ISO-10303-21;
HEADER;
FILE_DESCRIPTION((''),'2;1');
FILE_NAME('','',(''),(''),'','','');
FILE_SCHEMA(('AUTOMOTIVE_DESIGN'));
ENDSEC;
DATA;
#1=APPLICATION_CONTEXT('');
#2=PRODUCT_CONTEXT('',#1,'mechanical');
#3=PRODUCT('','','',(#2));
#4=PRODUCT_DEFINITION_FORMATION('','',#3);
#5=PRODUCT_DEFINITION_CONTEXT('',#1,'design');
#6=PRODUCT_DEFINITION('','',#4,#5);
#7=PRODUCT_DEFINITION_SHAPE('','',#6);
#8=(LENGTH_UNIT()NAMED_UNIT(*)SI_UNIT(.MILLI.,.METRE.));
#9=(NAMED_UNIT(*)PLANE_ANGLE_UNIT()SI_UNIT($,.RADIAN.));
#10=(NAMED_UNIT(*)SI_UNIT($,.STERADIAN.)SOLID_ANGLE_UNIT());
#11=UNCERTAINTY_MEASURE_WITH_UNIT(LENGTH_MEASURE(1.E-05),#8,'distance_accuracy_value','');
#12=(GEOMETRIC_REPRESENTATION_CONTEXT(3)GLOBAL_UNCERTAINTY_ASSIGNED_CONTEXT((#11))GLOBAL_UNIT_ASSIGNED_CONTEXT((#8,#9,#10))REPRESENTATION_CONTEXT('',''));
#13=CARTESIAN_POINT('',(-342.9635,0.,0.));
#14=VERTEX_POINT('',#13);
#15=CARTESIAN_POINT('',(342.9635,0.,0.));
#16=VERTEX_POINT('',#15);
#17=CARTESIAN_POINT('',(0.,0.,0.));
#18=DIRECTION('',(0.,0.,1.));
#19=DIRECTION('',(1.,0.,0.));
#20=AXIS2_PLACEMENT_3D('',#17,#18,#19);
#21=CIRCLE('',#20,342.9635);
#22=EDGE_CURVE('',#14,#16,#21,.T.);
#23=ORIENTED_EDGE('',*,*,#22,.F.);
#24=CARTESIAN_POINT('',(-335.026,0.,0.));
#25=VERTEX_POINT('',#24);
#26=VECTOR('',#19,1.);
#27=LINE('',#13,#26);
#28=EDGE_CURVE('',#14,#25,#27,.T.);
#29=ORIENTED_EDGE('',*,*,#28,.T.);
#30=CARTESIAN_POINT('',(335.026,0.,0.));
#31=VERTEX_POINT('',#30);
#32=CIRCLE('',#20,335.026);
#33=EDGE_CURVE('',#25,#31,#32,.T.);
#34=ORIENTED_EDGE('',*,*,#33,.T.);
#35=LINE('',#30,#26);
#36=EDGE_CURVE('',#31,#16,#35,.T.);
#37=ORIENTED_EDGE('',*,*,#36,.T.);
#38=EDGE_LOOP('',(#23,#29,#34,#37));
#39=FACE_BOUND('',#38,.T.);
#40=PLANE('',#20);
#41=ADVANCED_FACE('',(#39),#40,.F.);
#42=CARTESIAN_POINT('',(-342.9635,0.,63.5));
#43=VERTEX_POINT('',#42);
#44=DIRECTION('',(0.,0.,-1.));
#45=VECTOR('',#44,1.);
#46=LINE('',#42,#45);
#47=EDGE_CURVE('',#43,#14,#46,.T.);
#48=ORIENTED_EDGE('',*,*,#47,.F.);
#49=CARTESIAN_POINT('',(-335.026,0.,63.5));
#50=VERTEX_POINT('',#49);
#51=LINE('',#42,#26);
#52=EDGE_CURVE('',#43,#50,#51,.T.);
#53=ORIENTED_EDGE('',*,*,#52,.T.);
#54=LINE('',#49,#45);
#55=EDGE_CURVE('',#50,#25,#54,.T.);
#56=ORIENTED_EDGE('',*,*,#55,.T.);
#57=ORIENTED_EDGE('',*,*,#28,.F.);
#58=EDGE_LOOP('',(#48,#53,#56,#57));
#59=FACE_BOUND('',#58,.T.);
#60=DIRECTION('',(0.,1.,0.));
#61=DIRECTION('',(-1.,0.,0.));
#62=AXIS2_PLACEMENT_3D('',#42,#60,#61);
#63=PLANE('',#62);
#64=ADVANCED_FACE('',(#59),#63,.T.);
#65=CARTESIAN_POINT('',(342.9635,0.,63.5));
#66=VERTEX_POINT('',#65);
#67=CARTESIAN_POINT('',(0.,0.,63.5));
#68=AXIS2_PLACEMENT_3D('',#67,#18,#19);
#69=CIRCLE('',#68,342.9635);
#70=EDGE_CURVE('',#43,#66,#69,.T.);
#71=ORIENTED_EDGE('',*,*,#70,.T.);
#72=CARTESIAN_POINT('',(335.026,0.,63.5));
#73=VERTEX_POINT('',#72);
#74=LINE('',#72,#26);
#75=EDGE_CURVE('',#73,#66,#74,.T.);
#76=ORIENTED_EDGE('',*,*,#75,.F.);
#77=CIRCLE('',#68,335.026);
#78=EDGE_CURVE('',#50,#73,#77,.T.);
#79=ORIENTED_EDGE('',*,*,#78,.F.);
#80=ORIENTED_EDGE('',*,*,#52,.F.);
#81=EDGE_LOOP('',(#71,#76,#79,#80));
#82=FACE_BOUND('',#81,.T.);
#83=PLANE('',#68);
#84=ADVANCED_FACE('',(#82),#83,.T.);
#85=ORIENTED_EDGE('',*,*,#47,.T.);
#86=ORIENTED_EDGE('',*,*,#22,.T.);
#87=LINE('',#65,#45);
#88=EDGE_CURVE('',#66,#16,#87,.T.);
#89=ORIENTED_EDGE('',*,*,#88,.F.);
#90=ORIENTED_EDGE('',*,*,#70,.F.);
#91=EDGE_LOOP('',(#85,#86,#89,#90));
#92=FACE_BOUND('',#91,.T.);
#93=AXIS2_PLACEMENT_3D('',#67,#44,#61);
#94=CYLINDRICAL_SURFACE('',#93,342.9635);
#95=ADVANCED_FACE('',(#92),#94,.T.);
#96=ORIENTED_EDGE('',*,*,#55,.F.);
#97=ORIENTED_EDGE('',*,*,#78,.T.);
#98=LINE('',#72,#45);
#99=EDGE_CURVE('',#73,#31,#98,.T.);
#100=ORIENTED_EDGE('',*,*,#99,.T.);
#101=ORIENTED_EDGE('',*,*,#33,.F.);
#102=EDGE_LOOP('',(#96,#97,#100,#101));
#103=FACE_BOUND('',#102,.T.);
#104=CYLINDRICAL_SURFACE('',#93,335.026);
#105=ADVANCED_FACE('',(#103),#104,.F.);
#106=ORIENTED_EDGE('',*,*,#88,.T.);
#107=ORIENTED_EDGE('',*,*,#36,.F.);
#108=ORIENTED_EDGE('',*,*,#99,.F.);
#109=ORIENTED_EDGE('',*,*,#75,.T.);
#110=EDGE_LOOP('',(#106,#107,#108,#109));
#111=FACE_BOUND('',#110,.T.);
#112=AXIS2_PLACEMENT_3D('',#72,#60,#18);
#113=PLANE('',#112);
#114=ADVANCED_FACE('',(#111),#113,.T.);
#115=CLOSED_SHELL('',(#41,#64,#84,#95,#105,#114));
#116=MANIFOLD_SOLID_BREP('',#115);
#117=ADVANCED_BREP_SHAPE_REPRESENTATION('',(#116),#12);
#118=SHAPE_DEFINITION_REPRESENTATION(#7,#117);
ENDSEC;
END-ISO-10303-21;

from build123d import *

# Parameters (mm, degrees)
BASE_FLANGE1_DEPTH = 63.5


# Sheet-metal steps are written as plain solids
with BuildPart() as part:
    # Sketch1 → Base-Flange1 (new body)
    with BuildSketch(Plane.XY):
        with BuildLine():
            ThreePointArc((-335.026, 0), (0, -335.026), (335.026, 0))
            Line((335.026, 0), (342.9635, 0))
            ThreePointArc((342.9635, 0), (0, -342.9635), (-342.9635, 0))
            Line((-342.9635, 0), (-335.026, 0))
        make_face()
    extrude(amount=BASE_FLANGE1_DEPTH)


solid = part.part
